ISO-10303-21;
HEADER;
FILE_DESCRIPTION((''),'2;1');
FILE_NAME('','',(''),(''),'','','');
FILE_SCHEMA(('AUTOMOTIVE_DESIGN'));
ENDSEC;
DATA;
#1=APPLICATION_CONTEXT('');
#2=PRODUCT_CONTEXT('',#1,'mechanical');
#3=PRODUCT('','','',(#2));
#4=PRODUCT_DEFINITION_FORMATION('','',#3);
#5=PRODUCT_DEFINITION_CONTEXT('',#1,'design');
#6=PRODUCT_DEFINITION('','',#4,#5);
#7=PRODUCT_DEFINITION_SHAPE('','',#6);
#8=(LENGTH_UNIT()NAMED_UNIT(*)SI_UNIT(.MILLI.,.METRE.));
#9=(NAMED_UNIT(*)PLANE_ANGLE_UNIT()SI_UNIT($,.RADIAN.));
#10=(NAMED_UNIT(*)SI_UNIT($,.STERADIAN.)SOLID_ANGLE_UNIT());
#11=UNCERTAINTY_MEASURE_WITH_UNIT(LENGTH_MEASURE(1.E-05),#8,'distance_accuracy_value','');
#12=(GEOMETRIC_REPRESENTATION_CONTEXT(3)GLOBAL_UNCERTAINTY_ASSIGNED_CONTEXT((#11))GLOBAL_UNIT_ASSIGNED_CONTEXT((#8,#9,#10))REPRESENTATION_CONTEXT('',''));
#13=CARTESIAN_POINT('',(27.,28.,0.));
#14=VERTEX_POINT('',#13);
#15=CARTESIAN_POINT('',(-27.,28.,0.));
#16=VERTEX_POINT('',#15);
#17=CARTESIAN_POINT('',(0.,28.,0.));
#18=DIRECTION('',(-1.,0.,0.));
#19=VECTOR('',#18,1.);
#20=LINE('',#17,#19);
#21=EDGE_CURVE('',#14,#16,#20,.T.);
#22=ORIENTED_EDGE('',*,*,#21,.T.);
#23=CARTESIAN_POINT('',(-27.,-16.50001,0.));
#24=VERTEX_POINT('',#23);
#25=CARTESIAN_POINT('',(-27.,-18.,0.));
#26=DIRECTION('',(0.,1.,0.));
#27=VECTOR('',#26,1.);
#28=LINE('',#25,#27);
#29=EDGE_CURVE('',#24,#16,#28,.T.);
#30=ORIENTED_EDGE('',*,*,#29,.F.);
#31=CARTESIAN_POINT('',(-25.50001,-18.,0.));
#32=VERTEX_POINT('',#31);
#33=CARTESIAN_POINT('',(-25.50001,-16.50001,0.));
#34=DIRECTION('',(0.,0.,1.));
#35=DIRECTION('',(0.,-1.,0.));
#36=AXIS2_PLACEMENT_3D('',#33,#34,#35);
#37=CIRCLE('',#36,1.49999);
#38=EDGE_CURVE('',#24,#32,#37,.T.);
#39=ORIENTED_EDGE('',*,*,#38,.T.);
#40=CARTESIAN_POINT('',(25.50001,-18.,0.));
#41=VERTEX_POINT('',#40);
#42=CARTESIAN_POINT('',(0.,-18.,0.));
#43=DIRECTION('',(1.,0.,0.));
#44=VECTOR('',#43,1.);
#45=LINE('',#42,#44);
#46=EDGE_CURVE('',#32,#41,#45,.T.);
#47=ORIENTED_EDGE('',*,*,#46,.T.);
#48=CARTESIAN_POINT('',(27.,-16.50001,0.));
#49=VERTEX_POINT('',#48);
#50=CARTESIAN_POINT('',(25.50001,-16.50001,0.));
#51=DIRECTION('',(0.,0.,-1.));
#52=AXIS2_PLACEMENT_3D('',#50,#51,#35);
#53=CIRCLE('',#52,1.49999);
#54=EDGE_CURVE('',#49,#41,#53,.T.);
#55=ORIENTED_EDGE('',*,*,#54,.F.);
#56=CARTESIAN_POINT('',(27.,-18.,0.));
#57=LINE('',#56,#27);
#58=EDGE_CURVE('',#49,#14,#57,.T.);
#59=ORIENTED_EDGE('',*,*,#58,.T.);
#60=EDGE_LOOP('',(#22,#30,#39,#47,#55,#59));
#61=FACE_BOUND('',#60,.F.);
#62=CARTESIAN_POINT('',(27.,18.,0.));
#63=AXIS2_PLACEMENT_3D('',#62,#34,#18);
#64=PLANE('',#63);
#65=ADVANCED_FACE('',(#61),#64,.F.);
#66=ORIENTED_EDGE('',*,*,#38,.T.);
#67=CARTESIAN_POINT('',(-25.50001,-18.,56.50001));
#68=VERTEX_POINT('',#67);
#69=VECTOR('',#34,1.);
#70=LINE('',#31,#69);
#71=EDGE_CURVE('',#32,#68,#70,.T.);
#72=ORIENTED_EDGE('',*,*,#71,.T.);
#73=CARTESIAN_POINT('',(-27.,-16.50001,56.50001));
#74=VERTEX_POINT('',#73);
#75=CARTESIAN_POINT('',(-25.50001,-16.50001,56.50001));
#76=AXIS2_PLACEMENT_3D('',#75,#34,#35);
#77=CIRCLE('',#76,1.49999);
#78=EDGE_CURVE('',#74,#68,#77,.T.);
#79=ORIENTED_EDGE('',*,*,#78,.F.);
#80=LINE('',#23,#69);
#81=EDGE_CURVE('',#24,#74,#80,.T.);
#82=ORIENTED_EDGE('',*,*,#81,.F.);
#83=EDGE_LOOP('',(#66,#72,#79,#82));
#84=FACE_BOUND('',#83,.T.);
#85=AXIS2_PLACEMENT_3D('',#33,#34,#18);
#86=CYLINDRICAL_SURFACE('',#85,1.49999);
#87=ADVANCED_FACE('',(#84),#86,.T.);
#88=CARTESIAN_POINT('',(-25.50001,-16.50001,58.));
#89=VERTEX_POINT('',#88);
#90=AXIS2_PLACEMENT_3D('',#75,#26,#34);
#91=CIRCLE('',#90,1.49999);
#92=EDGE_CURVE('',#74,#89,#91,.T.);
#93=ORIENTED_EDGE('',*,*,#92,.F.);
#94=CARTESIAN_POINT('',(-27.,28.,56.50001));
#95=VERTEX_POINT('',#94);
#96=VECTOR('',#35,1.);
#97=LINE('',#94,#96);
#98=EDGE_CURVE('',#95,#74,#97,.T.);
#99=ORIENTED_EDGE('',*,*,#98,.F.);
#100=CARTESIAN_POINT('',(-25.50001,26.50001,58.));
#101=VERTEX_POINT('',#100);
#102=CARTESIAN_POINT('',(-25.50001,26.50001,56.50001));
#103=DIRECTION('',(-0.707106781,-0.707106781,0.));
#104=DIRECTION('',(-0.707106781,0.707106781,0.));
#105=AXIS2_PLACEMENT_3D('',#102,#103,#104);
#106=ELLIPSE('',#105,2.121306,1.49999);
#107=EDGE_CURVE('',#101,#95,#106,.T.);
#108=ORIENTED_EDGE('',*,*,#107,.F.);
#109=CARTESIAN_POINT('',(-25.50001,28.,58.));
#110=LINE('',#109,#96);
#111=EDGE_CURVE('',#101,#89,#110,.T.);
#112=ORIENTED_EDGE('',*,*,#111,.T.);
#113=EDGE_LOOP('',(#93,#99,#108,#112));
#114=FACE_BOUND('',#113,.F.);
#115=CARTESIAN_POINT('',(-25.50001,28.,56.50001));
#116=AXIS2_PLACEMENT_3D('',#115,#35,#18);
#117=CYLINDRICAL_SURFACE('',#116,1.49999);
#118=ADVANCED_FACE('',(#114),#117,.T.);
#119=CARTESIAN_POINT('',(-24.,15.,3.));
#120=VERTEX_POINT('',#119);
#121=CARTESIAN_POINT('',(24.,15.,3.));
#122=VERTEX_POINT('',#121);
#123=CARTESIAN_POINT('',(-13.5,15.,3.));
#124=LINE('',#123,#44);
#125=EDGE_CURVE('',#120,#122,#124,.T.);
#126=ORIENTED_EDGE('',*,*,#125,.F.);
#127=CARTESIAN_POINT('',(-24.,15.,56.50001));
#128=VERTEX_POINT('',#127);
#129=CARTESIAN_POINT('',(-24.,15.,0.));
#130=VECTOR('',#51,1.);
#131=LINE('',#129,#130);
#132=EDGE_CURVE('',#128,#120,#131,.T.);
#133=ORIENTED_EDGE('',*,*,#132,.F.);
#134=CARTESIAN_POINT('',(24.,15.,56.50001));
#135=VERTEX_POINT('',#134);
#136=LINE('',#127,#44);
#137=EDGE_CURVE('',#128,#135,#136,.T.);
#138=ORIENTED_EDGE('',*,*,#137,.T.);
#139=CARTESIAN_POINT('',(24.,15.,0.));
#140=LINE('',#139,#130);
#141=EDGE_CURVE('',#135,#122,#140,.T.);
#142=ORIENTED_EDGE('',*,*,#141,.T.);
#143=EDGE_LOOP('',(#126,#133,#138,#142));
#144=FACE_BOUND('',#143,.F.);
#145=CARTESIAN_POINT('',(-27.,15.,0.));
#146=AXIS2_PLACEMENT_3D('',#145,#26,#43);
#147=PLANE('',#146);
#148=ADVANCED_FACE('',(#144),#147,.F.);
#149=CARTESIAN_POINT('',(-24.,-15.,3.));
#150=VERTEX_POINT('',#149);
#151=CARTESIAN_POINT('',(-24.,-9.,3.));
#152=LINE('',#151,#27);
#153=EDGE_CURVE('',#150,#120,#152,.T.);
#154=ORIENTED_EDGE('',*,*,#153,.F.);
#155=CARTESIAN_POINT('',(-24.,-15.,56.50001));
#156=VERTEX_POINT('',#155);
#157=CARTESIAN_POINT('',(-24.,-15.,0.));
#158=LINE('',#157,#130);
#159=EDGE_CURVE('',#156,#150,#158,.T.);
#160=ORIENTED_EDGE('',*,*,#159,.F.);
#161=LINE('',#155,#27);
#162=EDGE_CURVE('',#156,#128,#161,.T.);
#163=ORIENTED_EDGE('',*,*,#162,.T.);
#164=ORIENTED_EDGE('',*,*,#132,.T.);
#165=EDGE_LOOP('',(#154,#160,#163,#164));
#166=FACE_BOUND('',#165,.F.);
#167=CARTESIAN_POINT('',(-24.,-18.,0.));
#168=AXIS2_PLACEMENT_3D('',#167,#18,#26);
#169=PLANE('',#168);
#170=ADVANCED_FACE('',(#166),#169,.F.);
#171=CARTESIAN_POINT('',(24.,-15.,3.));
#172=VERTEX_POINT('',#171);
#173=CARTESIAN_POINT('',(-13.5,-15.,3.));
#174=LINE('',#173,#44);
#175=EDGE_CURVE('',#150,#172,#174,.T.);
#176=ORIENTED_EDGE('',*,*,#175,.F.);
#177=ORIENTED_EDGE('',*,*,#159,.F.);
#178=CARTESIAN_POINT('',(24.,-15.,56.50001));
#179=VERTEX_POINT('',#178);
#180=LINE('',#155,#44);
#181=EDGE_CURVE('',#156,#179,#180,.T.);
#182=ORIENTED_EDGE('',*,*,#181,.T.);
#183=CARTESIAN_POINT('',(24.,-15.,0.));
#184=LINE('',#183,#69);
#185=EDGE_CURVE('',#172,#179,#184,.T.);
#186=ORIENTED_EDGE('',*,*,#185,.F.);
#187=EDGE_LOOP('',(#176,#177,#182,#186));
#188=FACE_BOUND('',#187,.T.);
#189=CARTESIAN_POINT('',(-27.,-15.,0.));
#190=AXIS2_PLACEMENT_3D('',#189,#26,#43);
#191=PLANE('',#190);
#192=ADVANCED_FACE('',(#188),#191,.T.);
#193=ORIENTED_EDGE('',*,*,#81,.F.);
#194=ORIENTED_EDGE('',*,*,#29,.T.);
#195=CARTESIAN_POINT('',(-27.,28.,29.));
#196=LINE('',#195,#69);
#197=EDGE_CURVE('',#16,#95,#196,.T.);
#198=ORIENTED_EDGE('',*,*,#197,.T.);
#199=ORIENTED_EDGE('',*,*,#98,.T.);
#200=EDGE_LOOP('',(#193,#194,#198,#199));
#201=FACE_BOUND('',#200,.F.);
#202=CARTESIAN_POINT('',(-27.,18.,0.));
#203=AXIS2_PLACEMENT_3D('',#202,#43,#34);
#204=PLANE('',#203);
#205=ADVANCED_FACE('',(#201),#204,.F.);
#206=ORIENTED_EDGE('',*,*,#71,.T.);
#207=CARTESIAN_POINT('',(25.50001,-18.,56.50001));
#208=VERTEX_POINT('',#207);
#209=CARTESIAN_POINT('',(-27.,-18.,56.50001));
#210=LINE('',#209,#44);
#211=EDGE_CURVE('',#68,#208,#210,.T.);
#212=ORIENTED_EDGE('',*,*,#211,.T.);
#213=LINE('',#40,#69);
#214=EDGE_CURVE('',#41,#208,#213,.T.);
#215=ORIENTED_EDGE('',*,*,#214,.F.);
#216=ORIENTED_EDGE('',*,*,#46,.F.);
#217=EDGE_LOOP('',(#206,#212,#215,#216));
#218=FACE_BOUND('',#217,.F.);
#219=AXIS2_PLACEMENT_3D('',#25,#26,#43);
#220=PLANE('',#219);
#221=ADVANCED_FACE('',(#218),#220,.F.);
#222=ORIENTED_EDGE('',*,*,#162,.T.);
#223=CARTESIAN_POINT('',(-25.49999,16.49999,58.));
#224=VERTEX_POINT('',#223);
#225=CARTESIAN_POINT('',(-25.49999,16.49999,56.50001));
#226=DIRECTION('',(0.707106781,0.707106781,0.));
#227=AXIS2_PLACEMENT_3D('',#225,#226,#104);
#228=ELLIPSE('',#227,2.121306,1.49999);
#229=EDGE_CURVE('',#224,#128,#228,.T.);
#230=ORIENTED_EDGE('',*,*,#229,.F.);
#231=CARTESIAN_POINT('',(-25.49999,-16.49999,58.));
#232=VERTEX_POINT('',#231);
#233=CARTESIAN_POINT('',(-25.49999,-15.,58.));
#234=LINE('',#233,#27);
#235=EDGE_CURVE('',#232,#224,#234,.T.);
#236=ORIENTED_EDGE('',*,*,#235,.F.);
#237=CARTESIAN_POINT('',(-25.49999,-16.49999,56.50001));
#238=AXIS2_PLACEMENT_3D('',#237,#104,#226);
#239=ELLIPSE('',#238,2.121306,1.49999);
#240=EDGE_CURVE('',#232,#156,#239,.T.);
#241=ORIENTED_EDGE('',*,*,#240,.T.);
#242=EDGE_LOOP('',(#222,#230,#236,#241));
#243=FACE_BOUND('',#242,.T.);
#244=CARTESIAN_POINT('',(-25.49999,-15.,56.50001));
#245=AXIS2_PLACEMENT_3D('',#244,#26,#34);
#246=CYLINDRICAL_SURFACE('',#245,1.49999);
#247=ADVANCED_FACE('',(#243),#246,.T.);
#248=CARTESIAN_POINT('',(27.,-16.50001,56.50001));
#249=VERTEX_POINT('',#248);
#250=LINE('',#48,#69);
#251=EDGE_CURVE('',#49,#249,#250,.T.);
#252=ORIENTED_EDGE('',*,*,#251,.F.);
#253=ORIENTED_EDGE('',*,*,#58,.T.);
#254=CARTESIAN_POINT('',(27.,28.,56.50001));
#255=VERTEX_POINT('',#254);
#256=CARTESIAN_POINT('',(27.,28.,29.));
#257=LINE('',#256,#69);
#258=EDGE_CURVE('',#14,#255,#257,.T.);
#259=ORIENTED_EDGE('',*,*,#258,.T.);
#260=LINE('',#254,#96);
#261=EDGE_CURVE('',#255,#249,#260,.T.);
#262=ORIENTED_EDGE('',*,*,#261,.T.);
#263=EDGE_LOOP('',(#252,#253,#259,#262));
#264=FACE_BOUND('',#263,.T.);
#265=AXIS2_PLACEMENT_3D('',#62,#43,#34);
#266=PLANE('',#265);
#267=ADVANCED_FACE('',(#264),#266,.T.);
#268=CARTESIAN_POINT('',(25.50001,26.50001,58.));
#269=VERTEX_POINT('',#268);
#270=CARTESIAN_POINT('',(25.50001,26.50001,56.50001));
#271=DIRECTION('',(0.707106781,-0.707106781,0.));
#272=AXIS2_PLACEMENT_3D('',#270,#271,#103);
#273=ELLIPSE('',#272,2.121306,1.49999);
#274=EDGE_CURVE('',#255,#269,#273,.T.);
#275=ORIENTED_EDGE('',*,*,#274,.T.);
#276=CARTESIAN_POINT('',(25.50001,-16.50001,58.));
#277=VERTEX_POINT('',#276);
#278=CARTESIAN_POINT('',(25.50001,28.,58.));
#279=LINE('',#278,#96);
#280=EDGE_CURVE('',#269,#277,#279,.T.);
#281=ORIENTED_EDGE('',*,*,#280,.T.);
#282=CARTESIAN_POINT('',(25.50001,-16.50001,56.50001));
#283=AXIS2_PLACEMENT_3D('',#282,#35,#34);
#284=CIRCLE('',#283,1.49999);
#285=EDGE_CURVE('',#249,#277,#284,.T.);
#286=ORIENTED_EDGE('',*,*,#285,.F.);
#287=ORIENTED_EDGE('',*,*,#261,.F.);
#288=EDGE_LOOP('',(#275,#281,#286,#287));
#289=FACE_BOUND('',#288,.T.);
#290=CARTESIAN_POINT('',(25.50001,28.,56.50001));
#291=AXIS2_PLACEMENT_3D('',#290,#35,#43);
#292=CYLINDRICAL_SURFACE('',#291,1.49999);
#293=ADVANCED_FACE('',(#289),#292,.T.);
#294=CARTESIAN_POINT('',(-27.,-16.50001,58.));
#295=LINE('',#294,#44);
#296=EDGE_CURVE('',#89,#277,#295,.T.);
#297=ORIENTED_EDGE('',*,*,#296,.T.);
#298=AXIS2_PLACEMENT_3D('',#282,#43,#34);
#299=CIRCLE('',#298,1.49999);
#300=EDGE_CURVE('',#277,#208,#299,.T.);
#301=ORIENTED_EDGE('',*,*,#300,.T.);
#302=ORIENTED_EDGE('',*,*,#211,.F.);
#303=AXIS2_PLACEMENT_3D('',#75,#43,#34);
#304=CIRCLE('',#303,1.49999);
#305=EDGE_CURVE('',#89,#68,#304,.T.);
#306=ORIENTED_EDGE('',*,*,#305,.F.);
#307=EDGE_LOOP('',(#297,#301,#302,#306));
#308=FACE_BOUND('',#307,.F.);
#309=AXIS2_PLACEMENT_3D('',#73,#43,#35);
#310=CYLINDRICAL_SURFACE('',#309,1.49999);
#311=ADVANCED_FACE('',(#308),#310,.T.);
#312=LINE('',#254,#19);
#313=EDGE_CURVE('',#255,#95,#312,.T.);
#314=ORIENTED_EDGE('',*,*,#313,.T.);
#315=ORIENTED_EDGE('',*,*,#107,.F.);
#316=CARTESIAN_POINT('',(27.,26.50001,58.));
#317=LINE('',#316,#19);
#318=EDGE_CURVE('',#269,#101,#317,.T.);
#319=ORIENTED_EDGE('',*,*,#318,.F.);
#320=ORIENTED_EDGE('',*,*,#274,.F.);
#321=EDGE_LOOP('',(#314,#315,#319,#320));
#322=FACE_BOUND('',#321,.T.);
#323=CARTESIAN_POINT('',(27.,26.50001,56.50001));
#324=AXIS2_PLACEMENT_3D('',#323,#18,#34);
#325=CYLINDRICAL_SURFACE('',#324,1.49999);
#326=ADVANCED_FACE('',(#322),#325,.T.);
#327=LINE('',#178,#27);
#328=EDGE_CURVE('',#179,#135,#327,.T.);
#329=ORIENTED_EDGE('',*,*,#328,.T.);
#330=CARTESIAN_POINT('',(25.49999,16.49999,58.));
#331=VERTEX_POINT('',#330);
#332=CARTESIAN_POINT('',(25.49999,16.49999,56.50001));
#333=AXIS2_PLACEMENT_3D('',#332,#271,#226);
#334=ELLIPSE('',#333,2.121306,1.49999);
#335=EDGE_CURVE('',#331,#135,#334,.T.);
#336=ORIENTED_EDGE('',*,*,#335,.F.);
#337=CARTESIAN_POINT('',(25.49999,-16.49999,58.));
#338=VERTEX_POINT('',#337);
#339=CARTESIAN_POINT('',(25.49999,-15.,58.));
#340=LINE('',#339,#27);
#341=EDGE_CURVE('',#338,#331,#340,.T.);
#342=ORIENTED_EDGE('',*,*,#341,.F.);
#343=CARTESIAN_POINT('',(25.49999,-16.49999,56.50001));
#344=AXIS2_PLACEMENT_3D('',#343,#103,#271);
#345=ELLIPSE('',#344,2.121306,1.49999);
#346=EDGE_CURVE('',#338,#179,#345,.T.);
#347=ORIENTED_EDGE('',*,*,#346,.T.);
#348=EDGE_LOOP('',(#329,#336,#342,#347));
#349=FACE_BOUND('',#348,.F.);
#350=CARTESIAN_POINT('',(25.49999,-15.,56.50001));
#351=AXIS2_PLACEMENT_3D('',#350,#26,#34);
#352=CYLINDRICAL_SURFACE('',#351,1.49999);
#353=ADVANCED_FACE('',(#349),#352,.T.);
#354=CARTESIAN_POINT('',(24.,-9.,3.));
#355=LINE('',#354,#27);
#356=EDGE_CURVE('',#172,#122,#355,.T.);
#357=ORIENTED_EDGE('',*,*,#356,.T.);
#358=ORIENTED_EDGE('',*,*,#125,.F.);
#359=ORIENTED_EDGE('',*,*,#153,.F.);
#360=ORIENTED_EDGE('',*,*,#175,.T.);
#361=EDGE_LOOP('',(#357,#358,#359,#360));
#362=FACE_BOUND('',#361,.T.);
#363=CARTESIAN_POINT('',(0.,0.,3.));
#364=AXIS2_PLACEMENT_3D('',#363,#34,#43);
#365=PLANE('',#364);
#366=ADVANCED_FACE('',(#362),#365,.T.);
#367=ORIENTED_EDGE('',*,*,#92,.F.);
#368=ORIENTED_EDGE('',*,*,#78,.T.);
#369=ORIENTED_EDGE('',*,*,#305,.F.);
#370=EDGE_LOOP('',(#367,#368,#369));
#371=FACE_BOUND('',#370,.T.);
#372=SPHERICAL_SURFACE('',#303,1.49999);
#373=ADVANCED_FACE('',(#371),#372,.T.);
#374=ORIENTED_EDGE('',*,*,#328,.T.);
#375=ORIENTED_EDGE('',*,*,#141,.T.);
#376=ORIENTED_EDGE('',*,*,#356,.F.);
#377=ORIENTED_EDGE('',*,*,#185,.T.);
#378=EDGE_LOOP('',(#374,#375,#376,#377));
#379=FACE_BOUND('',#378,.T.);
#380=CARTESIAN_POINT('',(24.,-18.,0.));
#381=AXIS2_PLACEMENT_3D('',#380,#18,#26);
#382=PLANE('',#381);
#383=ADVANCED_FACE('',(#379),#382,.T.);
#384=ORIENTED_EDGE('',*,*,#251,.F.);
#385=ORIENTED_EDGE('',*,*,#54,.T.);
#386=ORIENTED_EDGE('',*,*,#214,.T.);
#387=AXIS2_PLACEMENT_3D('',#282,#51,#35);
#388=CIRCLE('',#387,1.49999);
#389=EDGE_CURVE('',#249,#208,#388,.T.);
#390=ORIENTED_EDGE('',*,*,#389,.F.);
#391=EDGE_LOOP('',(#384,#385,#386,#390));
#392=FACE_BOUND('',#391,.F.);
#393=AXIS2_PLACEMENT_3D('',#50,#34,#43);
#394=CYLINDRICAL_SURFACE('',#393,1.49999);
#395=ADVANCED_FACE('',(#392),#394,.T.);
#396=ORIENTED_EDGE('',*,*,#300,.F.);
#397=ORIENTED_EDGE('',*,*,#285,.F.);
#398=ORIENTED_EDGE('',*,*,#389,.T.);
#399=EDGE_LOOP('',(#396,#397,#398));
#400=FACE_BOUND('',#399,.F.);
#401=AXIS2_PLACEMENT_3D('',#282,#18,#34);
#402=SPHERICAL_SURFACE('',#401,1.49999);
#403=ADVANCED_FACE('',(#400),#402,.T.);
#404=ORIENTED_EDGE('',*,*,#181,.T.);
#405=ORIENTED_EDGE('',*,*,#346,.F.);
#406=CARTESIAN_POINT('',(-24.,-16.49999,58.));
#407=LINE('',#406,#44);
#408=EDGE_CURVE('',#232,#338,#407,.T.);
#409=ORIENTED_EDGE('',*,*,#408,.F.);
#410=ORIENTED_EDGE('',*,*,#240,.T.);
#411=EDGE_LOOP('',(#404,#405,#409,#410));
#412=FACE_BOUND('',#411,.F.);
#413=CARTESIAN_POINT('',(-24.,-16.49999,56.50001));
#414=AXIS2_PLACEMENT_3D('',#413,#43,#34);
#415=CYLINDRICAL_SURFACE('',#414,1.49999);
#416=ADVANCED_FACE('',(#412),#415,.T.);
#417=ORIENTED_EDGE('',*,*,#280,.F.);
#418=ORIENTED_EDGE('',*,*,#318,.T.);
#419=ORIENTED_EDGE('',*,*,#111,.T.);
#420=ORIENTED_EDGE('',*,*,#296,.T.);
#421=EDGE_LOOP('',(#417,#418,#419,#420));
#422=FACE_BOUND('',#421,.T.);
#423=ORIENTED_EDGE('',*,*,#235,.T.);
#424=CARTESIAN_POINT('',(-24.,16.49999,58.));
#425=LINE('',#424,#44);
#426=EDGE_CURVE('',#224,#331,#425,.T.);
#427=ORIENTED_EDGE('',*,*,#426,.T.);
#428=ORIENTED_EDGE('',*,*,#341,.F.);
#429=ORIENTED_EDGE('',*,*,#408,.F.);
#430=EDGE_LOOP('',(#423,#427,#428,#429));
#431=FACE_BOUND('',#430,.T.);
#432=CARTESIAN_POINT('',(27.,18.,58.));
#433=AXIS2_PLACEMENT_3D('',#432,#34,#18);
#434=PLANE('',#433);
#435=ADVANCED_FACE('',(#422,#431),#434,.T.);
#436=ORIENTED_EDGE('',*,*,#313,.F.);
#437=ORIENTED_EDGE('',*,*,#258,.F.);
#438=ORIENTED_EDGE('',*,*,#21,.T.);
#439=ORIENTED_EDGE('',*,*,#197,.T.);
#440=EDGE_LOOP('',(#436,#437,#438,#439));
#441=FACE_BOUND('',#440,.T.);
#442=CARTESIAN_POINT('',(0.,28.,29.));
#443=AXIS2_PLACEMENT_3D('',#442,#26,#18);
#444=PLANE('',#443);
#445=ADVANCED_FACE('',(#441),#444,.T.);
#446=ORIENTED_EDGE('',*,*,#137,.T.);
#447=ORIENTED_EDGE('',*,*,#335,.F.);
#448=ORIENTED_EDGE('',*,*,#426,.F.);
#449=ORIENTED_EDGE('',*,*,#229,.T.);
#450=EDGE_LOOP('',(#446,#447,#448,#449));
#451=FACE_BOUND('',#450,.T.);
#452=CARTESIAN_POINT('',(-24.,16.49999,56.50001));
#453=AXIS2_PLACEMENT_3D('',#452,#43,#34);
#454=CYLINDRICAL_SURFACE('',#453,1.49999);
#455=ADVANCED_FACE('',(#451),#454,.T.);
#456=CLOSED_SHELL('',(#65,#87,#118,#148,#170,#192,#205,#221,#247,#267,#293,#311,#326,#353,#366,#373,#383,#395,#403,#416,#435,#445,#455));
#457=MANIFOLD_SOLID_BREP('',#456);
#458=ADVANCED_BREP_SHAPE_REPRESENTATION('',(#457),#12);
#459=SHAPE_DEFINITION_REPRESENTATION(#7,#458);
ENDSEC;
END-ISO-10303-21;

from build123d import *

# Parameters (mm, degrees)
F0_W     = 54
F0_H     = 36
F1_DEPTH = 58
F2_T     = -3
F3_W     = 54
F3_H     = 58
F4_DEPTH = 10
F5_R     = 1.49999


# Not quite as in the source:
# - a fillet or chamfer is up to 0.001 mm smaller than in the source, because OpenCascade refuses the exact size


with BuildPart() as f1:
    # F0 (on Top) → F1 (new body)
    with BuildSketch(Plane.XY):
        Rectangle(F0_W, F0_H)
    extrude(amount=F1_DEPTH)

    # F2
    f2_openings = [f1.faces().sort_by_distance(p)[0] for p in [
        (0, 0, 58),
    ]]
    offset(amount=F2_T, openings=f2_openings)

    # F3 (on face) → F4 (join)
    with BuildSketch(Plane(origin=(0, 18, 0), x_dir=(-1, 0, 0), z_dir=(0, 1, 0))):
        with Locations((0, 29)):
            Rectangle(F3_W, F3_H)
    extrude(amount=F4_DEPTH)

    # F5 (radius 1.5 in the source; OpenCascade refuses exactly that, so slightly less here)
    f5_edges = [f1.edges().sort_by_distance(p)[0] for p in [
        (0, -18, 58),
        (27, 5, 58),
        (0, 28, 58),
        (-27, 5, 58),
        (0, -15, 58),
        (-24, 0, 58),
        (0, 15, 58),
        (24, 0, 58),
        (-27, -18, 29),
        (27, -18, 29),
    ]]
    fillet(f5_edges, radius=F5_R)


solid = f1.part
